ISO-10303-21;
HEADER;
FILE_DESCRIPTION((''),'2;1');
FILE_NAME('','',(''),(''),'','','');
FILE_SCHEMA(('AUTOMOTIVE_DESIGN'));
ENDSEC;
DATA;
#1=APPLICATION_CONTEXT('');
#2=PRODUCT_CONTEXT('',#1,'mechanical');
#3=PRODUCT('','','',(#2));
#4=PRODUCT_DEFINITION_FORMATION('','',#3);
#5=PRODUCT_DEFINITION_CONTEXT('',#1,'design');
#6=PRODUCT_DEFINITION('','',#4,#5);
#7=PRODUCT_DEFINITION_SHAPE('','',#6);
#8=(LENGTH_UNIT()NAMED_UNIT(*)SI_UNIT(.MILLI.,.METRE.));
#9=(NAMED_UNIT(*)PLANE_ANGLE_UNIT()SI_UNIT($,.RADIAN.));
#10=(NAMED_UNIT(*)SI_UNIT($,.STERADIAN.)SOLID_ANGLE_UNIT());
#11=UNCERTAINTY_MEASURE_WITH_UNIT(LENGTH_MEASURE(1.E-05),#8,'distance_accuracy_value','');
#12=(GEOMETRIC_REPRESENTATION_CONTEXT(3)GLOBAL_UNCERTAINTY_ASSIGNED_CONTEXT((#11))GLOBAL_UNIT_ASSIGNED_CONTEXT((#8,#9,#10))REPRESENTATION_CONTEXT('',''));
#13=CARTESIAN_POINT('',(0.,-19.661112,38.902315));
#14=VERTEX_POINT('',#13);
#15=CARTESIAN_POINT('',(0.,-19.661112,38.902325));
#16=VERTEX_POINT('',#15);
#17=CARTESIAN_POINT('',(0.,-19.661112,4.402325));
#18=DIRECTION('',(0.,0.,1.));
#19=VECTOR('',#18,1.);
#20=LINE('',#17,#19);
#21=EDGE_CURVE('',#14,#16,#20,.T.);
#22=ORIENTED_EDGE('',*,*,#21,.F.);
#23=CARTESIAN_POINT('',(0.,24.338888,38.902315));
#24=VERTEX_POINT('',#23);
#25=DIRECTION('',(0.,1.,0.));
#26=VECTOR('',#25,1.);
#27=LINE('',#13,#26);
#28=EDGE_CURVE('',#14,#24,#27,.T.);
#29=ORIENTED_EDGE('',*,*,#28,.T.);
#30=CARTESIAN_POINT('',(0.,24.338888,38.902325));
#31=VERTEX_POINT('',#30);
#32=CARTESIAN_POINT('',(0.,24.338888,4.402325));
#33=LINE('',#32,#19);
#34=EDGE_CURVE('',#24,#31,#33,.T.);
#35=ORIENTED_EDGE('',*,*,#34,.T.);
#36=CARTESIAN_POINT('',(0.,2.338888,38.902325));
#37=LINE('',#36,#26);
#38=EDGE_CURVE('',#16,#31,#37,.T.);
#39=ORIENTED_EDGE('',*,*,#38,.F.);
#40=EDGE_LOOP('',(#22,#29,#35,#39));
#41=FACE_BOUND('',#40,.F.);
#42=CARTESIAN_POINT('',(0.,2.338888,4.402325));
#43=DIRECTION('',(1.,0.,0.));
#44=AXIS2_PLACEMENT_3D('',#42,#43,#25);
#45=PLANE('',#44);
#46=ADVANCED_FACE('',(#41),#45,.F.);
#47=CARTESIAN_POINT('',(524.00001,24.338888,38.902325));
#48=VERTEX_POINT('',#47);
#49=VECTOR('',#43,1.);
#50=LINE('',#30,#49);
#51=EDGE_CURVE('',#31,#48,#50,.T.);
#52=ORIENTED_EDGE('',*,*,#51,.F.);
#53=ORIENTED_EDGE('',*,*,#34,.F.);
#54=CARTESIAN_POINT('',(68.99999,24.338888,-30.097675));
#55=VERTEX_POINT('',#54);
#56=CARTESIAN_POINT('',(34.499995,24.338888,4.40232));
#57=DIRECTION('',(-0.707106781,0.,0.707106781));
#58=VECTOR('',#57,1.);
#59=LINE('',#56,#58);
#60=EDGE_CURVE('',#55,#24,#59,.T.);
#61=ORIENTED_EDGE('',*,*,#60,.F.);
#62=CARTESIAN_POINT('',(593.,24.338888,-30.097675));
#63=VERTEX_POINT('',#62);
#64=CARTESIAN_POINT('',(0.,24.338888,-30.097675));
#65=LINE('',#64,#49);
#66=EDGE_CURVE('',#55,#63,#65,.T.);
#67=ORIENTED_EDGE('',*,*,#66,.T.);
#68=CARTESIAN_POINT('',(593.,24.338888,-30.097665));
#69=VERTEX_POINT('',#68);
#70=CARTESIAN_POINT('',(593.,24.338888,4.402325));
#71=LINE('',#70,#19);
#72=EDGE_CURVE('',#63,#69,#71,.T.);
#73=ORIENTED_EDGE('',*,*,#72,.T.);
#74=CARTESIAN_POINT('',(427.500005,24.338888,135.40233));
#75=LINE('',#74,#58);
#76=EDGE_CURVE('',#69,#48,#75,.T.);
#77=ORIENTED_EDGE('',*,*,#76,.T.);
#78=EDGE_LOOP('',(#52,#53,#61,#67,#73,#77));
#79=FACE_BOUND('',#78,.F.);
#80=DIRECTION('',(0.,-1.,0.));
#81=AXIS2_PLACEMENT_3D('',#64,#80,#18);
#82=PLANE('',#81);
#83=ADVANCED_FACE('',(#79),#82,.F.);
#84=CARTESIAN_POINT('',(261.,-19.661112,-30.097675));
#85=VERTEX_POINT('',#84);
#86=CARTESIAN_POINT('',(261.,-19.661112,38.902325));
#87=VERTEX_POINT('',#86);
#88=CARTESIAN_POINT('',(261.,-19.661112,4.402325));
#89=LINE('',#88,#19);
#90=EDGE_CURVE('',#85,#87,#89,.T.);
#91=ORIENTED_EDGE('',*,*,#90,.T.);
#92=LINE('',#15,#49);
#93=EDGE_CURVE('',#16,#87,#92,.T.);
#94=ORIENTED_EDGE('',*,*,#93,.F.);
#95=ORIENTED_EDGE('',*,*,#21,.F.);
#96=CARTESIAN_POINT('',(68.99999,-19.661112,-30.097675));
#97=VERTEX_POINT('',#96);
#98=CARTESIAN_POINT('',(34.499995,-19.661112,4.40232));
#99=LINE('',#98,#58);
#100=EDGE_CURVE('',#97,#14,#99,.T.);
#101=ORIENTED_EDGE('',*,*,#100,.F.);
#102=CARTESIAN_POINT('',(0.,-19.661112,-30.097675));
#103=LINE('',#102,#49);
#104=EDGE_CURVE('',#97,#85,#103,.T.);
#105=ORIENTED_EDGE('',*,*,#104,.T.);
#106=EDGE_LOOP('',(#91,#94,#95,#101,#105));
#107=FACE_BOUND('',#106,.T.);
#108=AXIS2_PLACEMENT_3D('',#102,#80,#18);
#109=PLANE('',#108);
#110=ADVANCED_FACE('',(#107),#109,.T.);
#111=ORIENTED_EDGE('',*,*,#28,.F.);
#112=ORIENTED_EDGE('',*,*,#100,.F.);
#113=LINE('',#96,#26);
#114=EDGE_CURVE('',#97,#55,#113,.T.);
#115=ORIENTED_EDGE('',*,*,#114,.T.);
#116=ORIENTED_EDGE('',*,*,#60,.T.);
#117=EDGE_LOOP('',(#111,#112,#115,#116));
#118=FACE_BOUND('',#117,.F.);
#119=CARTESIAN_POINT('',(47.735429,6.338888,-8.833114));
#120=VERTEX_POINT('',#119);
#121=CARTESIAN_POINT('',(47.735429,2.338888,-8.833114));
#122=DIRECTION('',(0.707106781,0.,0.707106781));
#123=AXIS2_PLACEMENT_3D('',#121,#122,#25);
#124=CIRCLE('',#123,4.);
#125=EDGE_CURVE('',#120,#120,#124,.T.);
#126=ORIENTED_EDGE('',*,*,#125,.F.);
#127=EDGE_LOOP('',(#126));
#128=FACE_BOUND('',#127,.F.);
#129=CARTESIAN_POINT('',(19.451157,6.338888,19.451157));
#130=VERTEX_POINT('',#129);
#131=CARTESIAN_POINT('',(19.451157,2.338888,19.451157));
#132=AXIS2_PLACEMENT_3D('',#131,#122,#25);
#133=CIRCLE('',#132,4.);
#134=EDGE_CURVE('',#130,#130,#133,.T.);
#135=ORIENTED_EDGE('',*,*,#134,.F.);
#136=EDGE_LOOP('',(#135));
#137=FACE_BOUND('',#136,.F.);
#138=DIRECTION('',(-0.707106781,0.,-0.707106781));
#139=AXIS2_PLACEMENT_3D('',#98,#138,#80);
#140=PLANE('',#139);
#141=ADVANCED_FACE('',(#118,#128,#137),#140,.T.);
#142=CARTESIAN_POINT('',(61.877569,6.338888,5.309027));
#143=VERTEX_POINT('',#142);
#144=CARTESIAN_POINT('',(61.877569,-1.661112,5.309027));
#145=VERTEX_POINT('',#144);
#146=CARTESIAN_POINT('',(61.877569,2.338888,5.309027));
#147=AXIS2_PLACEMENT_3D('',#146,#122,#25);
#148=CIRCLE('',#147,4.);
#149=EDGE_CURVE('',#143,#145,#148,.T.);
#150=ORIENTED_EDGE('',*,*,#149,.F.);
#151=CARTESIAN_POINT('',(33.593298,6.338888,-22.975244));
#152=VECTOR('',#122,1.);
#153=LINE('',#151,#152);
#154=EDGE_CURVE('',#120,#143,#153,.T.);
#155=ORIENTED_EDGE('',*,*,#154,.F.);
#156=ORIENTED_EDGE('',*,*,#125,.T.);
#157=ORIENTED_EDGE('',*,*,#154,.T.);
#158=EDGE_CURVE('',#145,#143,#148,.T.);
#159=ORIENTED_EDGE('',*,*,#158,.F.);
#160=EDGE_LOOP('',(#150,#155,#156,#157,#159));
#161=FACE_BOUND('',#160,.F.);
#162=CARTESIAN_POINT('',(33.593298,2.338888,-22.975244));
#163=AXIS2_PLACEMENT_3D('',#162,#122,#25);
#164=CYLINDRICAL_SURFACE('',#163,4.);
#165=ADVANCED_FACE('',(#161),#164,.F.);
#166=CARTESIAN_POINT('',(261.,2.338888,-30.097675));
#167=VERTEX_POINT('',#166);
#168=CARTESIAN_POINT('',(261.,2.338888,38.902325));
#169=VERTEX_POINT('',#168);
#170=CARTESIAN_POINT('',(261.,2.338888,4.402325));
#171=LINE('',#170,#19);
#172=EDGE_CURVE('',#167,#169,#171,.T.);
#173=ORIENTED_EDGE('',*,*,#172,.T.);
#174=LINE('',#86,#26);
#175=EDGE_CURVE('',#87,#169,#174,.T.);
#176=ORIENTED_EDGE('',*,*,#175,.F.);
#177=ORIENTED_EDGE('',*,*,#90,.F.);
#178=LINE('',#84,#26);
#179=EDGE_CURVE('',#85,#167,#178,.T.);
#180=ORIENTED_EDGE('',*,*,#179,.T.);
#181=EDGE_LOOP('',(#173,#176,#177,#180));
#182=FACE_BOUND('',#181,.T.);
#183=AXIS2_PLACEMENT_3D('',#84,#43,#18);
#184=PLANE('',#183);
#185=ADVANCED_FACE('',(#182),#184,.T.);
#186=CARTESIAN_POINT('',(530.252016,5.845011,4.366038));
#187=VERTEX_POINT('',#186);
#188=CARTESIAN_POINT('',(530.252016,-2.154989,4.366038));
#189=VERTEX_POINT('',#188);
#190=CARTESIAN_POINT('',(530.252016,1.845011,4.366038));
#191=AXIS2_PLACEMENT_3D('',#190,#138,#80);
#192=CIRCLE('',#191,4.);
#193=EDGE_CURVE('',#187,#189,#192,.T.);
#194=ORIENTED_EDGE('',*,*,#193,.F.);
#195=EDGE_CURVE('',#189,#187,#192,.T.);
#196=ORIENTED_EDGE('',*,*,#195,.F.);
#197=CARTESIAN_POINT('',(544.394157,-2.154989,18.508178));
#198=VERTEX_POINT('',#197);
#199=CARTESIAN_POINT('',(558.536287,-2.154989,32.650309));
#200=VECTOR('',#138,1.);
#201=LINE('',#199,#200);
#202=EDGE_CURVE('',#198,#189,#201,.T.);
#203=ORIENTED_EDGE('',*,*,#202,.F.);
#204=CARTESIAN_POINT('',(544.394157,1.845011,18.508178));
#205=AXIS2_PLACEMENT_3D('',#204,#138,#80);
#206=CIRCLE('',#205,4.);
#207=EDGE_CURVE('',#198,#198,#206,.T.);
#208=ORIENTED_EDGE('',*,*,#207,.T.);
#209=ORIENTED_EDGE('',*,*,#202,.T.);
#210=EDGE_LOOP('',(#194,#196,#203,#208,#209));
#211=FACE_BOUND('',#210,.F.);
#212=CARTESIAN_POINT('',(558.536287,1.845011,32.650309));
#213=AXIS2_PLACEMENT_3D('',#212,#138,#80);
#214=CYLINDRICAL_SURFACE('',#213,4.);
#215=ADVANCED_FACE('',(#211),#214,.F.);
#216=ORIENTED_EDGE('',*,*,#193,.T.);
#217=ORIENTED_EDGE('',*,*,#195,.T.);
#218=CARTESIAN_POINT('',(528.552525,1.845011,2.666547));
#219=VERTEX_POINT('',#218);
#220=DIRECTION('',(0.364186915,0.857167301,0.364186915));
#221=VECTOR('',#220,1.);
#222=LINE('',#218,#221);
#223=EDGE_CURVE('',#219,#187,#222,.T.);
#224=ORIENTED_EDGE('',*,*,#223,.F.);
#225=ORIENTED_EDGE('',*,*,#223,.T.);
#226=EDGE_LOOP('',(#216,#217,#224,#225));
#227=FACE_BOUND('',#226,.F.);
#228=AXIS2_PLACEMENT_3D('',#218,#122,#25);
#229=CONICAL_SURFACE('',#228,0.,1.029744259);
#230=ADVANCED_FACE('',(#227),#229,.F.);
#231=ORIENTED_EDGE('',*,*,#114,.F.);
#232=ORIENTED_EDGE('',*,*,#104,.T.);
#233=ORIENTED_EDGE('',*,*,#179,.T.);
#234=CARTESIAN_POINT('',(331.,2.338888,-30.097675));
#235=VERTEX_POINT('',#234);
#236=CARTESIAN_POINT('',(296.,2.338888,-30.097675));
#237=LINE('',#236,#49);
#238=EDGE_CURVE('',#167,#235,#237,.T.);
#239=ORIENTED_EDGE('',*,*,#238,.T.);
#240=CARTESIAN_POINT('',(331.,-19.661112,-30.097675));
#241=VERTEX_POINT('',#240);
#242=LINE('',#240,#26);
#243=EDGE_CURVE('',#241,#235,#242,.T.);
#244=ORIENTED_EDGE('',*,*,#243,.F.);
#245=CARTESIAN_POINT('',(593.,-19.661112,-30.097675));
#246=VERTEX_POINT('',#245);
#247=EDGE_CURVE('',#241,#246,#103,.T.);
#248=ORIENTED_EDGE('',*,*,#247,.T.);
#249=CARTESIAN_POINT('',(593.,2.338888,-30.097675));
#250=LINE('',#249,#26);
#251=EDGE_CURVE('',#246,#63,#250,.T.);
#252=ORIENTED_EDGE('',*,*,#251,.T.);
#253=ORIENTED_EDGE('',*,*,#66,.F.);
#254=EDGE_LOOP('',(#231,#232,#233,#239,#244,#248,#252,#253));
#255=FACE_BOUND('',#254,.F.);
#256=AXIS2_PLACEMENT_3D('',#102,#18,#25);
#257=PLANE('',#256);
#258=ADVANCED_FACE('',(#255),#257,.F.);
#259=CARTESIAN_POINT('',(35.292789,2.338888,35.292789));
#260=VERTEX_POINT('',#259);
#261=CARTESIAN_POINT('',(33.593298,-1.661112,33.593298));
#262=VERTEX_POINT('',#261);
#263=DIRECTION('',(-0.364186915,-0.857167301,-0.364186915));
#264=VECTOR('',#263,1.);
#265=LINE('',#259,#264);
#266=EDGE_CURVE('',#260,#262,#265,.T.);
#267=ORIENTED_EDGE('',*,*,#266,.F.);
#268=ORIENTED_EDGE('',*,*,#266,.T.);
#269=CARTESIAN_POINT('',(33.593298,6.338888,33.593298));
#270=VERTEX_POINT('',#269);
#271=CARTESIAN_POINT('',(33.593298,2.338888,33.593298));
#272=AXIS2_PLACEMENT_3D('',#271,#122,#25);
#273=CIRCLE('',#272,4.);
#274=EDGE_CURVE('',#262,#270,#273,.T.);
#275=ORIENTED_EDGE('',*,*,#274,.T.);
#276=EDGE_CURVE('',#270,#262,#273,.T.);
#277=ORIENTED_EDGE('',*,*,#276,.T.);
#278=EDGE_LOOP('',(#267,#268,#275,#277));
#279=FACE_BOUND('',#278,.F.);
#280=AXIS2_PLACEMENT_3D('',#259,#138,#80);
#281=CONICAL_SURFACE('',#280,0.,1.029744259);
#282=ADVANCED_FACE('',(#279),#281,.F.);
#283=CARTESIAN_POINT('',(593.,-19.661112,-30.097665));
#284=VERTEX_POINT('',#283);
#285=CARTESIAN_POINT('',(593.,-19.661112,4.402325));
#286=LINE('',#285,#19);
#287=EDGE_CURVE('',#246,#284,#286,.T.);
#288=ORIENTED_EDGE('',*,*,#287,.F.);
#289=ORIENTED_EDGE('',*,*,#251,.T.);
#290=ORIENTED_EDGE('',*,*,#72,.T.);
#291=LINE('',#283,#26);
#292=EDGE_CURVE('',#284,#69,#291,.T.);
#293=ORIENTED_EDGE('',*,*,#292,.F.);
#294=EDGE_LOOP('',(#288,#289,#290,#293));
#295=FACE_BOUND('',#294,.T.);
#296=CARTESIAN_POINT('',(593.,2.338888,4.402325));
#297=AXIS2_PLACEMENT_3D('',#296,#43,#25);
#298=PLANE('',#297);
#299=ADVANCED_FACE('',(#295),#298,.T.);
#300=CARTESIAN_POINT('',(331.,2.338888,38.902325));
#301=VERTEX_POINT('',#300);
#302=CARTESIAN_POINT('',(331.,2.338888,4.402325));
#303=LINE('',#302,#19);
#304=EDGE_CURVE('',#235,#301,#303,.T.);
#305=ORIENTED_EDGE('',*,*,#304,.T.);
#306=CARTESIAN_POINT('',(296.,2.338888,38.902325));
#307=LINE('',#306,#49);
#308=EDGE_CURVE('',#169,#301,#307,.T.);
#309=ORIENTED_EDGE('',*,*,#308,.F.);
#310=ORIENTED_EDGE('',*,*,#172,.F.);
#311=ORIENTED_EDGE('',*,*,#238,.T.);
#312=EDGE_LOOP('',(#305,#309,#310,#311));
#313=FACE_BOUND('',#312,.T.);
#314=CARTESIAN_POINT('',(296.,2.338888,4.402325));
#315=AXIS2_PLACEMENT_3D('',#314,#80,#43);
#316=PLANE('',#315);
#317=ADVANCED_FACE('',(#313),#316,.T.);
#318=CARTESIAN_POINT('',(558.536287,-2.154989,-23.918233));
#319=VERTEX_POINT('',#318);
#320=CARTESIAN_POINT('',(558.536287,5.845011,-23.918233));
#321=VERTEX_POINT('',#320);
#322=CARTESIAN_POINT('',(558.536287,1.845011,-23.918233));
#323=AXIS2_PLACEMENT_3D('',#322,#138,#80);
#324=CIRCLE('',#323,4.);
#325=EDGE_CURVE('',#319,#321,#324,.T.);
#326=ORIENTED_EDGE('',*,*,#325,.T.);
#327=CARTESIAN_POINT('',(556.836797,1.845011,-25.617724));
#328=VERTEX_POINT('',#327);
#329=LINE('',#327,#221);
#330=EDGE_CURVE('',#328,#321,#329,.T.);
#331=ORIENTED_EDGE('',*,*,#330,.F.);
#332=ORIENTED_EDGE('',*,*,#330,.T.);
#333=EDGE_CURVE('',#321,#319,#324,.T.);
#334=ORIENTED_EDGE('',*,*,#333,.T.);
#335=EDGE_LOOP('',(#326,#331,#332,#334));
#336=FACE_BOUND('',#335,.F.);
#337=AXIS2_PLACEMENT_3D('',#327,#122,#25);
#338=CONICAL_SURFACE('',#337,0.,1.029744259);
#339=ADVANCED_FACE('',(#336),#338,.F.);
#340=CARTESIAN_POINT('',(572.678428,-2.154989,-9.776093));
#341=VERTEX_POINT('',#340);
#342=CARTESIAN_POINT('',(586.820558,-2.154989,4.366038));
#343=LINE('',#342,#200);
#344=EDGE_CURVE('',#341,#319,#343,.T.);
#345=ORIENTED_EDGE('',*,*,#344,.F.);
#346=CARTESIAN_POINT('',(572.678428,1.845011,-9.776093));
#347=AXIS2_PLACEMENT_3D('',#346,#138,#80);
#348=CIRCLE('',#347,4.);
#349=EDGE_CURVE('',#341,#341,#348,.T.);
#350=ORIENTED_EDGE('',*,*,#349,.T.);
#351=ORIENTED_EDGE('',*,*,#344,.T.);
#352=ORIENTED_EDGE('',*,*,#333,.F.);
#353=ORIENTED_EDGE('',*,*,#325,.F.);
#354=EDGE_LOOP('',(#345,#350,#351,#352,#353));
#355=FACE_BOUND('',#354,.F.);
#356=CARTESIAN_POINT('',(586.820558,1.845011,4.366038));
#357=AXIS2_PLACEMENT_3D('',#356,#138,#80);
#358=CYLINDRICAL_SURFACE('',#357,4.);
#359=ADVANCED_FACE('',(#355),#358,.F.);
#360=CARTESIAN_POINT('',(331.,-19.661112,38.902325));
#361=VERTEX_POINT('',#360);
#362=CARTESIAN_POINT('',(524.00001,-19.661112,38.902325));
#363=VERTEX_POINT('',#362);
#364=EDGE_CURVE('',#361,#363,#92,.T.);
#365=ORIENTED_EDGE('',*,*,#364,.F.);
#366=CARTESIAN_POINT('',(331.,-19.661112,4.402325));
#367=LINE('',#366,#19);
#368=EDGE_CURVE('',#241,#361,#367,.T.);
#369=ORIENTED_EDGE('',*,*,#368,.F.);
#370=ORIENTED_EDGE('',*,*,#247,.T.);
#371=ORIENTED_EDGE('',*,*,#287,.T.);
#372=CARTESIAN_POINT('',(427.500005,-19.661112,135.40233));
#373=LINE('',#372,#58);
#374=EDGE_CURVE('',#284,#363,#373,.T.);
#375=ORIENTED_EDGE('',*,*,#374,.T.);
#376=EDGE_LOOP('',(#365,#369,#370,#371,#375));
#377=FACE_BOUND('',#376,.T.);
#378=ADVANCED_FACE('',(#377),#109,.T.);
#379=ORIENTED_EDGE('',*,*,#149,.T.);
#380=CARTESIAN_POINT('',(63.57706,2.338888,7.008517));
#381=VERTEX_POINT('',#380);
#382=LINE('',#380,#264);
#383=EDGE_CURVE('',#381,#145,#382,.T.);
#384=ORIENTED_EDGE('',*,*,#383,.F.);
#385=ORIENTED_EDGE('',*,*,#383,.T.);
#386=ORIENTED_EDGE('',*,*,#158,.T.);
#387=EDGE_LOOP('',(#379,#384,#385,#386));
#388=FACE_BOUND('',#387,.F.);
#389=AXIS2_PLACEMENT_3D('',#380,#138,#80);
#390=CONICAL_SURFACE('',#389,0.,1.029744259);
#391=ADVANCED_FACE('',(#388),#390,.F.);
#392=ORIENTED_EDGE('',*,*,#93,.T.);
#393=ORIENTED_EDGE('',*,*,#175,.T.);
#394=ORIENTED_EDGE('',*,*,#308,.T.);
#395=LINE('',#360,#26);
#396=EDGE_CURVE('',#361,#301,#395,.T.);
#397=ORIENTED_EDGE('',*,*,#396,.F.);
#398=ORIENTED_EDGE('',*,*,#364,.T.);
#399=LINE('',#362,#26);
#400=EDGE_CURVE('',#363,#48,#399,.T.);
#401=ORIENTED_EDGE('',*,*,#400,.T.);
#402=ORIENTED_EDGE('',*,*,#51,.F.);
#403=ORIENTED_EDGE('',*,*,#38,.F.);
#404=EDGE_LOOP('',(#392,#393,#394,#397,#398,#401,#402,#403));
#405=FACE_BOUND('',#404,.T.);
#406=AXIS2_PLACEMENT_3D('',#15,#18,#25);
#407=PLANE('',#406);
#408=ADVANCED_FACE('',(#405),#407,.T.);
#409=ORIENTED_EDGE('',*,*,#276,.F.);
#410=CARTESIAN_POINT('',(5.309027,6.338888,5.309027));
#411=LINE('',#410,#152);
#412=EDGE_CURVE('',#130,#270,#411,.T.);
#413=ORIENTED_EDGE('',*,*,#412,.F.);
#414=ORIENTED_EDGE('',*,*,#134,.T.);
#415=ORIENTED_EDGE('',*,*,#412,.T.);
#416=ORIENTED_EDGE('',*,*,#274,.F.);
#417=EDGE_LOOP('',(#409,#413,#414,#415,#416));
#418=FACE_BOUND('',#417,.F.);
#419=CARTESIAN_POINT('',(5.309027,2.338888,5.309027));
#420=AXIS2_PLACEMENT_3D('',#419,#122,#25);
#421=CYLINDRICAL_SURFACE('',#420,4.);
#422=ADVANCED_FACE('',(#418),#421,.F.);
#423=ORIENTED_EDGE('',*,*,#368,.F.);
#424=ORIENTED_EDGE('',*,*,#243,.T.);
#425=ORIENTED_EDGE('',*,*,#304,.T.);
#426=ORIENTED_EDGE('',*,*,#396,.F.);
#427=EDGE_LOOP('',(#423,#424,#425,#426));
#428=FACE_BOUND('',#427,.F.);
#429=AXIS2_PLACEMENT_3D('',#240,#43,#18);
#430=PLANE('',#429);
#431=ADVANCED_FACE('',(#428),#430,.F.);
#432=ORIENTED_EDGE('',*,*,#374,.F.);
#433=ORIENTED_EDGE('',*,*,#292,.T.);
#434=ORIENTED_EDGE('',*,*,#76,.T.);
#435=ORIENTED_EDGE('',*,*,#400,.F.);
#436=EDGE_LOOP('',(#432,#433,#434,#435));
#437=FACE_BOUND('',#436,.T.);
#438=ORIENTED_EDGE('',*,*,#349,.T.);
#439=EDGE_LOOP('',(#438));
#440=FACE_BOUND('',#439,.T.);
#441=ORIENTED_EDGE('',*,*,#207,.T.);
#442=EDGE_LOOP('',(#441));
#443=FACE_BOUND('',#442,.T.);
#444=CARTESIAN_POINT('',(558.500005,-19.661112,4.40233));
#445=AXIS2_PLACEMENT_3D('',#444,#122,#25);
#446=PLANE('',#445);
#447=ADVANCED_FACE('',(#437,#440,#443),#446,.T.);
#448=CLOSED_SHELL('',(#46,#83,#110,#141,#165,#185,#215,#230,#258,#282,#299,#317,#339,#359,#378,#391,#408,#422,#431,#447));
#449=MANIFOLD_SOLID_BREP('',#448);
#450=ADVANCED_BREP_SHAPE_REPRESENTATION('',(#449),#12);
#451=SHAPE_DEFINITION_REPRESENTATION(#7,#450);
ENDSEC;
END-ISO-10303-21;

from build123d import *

# Parameters (mm, degrees)
F0_W     = 44
F0_H     = 69
F1_DEPTH = 593
F2_SIZE  = 68.99999
F4_D     = 8
F4_DEPTH = 20
F4_TIP   = 2.4034424761
F5_SIZE  = 68.99999
F7_D     = 8
F7_DEPTH = 20
F7_TIP   = 2.4034424761
F8_W     = 70
F8_H     = 69
F9_DEPTH = 22


# Not quite as in the source:
# - a fillet or chamfer is up to 0.001 mm smaller than in the source, because OpenCascade refuses the exact size


with BuildPart() as f1:
    # F0 (on Right) → F1 (new body)
    with BuildSketch(Plane.YZ):
        with Locations((2.3388881236, 4.4023249735)):
            Rectangle(F0_W, F0_H)
    extrude(amount=F1_DEPTH)

    # F2 (size 69 in the source; OpenCascade refuses exactly that, so slightly less here)
    f2_edges = [f1.edges().sort_by_distance(p)[0] for p in [
        (0, 2.338888, -30.097675),
    ]]
    chamfer(f2_edges, length=F2_SIZE)

    # F4
    with Locations(Plane(origin=(19.4511624867, 0, 19.4511624867), x_dir=(0, -1, 0), z_dir=(-0.7071067812, 0, -0.7071067812))):
        with Locations((-2.3388881236, 0), (-2.3388881236, -40)):
            Hole(F4_D / 2, depth=F4_DEPTH)
            with Locations((0, 0, -(F4_DEPTH + F4_TIP / 2))):  # 118° drill point
                Cone(0, F4_D / 2, F4_TIP, mode=Mode.SUBTRACT)

    # F5 (size 69 in the source; OpenCascade refuses exactly that, so slightly less here)
    f5_edges = [f1.edges().sort_by_distance(p)[0] for p in [
        (593, 2.338888, 38.902325),
    ]]
    chamfer(f5_edges, length=F5_SIZE)

    # F7
    with Locations(Plane(origin=(281.4511624867, 0, 281.4511624867), x_dir=(0, 1, 0), z_dir=(0.7071067812, 0, 0.7071067812))):
        with Locations((1.8450106473, -371.8575412992), (1.8450106473, -411.8575412992)):
            Hole(F7_D / 2, depth=F7_DEPTH)
            with Locations((0, 0, -(F7_DEPTH + F7_TIP / 2))):  # 118° drill point
                Cone(0, F7_D / 2, F7_TIP, mode=Mode.SUBTRACT)

    # F8 (on face) → F9 (cut)
    with BuildSketch(Plane.XZ.offset(19.6611118764)):
        with Locations((296, 4.4023249735)):
            Rectangle(F8_W, F8_H)
    extrude(amount=-F9_DEPTH, mode=Mode.SUBTRACT)


solid = f1.part
